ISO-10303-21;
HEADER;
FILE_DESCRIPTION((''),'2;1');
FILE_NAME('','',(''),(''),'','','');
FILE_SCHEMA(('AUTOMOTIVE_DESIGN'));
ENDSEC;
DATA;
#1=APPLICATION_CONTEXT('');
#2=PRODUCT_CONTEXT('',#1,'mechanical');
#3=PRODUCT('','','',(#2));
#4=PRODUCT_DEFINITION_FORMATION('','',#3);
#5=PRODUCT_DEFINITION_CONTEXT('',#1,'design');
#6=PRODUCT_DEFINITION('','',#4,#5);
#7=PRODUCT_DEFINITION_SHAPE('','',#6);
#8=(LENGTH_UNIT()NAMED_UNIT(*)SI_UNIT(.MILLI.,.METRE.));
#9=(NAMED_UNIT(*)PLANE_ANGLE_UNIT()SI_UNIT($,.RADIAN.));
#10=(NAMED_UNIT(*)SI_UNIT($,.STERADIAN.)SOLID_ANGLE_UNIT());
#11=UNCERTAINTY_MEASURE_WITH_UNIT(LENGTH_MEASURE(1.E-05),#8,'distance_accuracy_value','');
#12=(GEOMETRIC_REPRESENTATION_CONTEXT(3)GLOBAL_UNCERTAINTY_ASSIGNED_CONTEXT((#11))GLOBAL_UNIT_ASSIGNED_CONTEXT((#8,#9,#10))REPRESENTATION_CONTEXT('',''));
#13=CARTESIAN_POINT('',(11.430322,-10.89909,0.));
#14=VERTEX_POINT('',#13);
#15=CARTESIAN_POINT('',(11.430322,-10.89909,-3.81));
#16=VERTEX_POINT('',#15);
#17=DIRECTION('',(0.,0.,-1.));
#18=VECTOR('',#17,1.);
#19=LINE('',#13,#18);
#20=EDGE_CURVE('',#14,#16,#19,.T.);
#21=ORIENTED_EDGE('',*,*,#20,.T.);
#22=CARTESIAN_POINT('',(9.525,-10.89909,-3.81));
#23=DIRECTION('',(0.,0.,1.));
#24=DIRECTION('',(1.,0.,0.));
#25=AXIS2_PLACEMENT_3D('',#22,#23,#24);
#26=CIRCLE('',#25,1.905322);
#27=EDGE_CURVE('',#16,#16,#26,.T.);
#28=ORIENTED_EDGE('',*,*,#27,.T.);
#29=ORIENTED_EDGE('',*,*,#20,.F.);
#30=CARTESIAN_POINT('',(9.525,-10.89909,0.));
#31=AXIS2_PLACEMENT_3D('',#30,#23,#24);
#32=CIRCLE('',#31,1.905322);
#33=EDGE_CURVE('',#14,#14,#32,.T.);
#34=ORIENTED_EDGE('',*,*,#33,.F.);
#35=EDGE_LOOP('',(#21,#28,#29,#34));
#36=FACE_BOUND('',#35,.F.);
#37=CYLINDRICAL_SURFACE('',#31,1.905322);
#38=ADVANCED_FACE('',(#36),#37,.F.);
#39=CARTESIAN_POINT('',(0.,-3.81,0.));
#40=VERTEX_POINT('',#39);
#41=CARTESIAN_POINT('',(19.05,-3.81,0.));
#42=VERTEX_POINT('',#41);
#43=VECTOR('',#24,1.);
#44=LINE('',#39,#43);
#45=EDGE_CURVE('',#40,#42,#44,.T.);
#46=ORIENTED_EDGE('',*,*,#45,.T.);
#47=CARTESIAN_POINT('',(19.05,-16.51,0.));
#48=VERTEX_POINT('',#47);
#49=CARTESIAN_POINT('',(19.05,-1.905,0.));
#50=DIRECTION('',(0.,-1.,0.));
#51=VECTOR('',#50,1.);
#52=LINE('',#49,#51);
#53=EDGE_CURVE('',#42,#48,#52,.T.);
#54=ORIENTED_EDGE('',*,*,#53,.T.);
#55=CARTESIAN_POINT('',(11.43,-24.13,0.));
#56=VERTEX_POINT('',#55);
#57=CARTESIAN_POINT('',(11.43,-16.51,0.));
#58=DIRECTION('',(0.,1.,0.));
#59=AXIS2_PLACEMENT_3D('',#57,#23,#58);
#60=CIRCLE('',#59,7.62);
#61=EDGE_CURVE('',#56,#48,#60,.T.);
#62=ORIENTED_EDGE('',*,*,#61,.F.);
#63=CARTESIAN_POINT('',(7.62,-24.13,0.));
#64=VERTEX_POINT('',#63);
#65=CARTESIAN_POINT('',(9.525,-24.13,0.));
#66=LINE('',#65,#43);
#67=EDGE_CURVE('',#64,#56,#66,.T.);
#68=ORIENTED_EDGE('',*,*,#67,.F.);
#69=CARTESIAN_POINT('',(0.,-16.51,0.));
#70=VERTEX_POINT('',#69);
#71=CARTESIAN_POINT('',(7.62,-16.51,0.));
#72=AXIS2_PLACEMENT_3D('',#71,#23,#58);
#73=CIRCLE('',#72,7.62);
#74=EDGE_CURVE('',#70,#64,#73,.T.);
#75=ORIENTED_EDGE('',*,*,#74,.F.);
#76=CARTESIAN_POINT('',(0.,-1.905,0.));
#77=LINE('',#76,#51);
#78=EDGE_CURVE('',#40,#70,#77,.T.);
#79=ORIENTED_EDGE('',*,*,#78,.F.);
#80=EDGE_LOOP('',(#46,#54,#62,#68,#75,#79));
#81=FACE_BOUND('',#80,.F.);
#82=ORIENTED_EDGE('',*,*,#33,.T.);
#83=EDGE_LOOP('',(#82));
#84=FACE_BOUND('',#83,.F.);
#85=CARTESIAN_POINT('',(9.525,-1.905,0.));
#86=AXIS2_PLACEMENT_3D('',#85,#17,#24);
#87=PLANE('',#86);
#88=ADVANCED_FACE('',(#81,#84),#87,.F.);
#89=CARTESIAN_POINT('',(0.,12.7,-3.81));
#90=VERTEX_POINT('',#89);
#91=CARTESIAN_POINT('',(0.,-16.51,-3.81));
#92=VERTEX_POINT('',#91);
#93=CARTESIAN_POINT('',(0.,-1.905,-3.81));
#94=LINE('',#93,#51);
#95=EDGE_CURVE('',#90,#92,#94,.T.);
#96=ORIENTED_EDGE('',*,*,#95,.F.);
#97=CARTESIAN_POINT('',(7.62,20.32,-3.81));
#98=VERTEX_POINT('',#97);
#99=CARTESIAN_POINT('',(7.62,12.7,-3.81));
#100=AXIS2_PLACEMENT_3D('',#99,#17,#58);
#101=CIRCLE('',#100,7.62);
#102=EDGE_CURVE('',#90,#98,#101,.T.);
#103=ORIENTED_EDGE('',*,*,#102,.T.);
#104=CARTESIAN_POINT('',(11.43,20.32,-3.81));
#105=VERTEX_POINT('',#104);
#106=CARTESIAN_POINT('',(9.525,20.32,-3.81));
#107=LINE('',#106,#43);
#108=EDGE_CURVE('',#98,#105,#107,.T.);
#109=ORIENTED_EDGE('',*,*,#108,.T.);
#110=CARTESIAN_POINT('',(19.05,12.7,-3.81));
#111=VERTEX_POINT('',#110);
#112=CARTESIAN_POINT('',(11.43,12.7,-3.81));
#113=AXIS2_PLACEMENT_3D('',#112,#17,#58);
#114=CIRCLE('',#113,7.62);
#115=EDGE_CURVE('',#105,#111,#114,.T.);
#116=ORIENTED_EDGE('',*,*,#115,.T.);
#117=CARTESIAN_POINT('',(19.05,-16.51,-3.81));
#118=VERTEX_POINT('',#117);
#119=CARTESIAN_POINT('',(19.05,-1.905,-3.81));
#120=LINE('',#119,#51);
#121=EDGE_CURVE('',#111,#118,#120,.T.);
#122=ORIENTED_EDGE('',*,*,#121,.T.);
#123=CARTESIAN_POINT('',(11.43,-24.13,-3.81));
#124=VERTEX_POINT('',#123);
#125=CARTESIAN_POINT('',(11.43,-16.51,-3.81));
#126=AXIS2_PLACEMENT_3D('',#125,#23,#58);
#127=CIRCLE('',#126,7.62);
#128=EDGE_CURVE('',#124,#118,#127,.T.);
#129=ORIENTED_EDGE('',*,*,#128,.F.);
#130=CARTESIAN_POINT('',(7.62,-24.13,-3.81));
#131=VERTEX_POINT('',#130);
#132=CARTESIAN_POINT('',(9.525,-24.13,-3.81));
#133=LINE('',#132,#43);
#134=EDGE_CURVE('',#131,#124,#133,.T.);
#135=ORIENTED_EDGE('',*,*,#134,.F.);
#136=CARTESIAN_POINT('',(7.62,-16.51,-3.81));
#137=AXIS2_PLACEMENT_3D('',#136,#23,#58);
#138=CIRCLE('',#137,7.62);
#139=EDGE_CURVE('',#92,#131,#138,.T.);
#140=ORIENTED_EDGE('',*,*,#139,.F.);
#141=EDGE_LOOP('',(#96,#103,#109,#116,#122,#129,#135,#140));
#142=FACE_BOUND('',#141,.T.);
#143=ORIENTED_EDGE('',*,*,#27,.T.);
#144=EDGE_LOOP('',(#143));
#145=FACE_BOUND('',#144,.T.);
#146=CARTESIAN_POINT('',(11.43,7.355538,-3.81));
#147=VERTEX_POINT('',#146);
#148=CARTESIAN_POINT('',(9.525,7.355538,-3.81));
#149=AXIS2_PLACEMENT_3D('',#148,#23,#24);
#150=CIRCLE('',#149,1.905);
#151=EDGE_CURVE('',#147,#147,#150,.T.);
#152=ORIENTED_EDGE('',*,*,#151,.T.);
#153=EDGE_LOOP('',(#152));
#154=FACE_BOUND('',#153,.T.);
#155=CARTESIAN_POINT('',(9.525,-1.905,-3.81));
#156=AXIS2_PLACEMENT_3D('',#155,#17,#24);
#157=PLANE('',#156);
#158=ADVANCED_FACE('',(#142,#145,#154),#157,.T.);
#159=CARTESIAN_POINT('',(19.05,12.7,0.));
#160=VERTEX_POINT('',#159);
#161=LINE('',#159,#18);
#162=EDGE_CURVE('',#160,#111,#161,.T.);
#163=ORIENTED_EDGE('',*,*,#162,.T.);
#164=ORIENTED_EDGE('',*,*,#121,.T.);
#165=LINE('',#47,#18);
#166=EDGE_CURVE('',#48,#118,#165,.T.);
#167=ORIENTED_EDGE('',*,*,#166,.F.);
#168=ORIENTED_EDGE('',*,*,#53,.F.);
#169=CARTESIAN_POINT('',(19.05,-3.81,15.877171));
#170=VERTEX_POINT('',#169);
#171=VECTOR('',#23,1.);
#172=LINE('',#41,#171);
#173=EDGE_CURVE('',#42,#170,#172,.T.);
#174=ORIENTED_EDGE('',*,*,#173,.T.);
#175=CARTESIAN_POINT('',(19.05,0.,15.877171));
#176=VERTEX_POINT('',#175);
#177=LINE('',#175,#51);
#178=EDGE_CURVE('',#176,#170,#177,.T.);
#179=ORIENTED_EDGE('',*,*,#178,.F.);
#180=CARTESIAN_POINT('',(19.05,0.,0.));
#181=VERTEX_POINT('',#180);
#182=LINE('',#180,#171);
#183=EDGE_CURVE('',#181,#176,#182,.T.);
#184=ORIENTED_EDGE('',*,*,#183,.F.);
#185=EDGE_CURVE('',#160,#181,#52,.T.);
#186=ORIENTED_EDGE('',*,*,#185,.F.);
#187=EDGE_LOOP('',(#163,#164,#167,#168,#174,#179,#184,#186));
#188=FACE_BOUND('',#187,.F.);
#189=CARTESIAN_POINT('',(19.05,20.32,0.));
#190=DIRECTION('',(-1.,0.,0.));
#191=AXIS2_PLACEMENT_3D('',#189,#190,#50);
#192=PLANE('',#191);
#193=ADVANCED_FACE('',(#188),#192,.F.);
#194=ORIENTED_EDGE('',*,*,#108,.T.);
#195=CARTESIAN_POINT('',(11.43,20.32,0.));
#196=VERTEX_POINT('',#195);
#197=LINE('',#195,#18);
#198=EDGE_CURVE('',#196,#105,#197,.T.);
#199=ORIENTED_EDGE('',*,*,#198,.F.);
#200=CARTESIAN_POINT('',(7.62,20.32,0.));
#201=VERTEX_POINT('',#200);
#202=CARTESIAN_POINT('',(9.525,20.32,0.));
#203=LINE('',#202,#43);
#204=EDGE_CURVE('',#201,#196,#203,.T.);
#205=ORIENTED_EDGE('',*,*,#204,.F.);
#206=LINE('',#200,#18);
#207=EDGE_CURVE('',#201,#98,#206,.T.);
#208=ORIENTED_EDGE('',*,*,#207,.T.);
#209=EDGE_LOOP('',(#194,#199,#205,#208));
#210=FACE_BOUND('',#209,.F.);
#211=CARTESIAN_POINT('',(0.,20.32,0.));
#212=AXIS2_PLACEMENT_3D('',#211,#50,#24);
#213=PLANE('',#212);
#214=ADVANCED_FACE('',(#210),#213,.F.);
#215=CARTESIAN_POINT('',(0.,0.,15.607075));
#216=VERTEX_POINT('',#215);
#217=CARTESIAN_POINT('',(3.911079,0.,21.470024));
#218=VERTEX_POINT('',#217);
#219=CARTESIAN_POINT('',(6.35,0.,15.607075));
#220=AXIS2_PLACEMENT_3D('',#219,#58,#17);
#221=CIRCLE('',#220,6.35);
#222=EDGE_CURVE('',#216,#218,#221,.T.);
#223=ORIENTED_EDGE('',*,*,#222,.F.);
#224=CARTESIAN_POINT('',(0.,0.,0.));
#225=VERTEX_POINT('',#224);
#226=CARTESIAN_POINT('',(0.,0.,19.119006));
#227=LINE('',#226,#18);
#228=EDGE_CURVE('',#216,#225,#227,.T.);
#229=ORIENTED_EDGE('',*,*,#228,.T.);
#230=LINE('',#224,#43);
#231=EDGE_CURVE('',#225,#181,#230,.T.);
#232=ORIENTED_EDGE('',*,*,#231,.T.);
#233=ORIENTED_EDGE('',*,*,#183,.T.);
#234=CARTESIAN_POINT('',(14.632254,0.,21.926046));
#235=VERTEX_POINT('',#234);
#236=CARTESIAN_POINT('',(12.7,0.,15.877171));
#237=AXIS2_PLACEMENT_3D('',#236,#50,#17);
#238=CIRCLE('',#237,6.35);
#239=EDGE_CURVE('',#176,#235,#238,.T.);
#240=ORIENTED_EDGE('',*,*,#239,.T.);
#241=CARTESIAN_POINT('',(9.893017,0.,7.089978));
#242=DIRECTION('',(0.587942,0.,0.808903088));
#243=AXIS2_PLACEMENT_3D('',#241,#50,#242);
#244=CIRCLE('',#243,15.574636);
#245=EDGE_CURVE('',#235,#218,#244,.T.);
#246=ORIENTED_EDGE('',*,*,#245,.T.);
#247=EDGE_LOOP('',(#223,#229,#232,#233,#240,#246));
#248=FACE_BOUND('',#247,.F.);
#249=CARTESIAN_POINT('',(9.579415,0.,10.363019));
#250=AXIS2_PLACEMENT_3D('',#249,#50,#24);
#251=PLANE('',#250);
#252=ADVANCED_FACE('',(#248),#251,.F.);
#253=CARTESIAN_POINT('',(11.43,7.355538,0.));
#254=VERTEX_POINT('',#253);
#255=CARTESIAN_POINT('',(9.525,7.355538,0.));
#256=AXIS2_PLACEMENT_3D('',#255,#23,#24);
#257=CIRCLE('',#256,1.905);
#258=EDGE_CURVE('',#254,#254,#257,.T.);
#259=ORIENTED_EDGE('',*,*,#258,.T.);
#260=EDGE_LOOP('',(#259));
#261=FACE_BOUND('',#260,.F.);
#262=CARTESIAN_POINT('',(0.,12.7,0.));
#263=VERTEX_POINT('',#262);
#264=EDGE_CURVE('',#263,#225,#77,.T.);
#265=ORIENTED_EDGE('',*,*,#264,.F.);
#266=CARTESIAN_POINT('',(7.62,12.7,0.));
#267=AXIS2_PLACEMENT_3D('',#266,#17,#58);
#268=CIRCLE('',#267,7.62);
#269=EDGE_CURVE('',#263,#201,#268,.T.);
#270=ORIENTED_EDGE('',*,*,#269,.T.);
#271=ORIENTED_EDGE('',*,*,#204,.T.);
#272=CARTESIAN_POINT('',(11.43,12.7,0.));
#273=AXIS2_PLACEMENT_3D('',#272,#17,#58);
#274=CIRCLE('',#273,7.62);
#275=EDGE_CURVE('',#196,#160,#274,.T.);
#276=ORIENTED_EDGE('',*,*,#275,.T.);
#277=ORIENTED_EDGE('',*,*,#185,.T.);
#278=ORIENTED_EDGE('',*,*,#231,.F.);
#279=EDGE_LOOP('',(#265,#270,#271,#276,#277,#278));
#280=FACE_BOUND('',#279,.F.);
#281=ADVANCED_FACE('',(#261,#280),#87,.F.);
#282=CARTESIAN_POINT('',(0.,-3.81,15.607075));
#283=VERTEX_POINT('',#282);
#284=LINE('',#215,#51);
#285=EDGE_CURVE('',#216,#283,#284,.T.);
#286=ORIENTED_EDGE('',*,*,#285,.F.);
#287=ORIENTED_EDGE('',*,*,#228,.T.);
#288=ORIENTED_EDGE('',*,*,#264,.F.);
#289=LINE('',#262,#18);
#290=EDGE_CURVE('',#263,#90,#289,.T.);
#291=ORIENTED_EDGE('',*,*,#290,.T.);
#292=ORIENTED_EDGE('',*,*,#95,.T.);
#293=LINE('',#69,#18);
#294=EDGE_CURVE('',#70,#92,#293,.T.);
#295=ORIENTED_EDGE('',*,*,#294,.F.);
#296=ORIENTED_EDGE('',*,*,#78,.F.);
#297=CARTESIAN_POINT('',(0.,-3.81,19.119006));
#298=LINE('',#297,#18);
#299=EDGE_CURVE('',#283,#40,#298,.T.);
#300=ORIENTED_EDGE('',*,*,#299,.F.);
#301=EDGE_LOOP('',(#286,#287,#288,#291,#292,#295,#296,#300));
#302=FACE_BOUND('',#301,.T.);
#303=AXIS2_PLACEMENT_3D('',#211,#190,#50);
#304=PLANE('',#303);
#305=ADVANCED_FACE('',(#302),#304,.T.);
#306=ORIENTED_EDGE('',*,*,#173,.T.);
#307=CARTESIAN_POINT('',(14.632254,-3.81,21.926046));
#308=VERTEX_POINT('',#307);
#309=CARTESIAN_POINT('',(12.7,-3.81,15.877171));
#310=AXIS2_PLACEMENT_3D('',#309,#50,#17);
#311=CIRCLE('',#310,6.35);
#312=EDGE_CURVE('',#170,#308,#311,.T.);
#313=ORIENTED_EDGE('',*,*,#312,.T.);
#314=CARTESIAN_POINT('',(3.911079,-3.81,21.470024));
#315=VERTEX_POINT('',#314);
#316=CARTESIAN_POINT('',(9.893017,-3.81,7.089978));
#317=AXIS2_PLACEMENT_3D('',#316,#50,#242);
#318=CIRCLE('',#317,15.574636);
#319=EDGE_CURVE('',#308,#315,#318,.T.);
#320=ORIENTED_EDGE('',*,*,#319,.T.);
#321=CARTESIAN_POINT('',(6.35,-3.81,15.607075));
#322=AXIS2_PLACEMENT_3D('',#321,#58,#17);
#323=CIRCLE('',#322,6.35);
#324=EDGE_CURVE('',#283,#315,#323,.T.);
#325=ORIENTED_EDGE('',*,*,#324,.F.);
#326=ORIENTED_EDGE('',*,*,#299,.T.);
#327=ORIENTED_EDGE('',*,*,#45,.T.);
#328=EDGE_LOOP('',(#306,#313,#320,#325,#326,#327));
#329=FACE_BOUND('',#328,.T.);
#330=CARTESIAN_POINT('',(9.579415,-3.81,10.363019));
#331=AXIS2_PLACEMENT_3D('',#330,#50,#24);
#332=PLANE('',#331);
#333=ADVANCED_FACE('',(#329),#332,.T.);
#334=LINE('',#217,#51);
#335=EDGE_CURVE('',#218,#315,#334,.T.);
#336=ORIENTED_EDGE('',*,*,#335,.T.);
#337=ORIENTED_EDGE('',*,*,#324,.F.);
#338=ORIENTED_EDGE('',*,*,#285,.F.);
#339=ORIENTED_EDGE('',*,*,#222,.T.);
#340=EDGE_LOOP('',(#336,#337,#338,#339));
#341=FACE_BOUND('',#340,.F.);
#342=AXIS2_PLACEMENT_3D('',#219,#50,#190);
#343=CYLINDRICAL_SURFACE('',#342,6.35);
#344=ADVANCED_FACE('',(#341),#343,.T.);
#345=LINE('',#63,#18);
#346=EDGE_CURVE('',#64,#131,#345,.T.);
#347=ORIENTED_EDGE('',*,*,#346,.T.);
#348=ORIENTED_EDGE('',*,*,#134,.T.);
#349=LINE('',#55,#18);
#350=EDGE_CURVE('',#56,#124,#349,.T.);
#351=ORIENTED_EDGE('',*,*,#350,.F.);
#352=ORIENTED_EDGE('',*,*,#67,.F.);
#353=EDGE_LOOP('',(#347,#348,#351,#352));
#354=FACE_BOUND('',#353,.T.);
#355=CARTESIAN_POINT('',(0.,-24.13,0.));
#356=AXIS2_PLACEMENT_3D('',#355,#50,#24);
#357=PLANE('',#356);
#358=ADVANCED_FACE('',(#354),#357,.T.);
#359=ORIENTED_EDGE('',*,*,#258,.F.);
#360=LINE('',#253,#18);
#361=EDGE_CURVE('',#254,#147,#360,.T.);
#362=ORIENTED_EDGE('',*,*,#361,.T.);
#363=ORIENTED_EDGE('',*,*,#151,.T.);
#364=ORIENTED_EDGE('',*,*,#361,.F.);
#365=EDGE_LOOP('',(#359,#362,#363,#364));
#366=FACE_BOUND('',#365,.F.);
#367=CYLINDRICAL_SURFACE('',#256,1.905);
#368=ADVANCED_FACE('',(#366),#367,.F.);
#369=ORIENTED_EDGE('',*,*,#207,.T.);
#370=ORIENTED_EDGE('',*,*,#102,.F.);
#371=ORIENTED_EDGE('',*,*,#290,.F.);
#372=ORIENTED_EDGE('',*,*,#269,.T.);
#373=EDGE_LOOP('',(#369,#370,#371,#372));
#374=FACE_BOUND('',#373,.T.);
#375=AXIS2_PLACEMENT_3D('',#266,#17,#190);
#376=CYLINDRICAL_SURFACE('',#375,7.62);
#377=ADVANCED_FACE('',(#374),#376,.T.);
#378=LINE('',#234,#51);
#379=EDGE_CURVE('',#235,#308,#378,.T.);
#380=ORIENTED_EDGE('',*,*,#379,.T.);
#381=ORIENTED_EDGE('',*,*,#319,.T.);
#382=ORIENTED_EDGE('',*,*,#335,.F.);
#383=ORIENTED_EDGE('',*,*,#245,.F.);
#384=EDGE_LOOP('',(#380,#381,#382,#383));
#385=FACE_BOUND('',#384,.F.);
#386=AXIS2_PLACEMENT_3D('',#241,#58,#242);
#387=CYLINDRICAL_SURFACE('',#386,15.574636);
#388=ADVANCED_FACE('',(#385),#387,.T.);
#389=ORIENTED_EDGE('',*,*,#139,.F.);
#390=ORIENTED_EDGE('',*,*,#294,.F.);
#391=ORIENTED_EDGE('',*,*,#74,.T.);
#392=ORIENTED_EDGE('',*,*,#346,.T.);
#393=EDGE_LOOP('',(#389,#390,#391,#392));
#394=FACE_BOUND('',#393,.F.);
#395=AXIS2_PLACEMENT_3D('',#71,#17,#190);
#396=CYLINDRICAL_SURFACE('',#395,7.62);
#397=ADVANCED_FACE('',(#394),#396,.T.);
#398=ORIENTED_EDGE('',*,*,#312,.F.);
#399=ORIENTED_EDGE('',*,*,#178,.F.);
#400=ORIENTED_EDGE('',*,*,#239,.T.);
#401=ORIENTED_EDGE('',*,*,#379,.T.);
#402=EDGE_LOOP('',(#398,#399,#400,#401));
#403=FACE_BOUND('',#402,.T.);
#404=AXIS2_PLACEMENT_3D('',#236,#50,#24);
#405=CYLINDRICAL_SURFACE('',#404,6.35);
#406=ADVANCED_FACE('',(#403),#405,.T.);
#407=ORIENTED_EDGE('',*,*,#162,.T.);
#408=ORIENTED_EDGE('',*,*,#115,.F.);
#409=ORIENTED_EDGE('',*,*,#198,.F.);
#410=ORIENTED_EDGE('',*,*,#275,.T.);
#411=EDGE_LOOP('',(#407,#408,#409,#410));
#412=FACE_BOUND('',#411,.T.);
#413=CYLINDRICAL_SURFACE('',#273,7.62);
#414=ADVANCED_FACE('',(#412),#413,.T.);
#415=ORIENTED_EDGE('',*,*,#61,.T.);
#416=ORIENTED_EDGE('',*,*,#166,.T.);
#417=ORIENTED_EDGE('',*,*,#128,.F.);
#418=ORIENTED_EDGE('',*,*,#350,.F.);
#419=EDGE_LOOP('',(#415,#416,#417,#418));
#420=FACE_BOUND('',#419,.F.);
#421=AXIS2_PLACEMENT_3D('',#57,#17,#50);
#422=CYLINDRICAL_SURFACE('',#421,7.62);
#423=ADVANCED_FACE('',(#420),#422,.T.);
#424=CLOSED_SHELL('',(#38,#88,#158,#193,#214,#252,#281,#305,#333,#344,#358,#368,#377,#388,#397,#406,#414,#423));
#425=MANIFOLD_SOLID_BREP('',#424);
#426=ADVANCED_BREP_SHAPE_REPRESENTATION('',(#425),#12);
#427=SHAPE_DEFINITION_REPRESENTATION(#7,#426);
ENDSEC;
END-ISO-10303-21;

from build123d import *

# Parameters (mm, degrees)
F1_DEPTH = 3.81
F2_R     = 6.35
F3_W     = 19.05
F3_H     = 44.45
F4_DEPTH = 3.81
F5_R     = 7.62
F6_R     = 1.905
F6_R_2   = 1.9053216062
F7_DEPTH = 25.4


# Not quite as in the source:
# - a feature names something its author has since deleted; it is built from what else it names


with BuildPart() as f1:
    # F0 (on Front) → F1 (new body)
    with BuildSketch(Plane.XZ):
        with BuildLine():
            Line((0, 19.1190056503), (0, 0))
            Line((0, 0), (19.05, 0))
            Line((19.05, 0), (19.05, 19.6883492172))
            ThreePointArc((19.05, 19.6883492172), (9.4277487791, 22.6576630171), (0, 19.1190056503))
        make_face()
    extrude(amount=F1_DEPTH)

    # F2
    f2_edges = [f1.edges().sort_by_distance(p)[0] for p in [
        (0, -1.905, 19.119006),
        (19.05, -1.905, 19.688349),
    ]]
    fillet(f2_edges, radius=F2_R)

    # F3 (on face) → F4 (join)
    with BuildSketch(Plane(origin=(0, 0, 0), x_dir=(1, 0, 0), z_dir=(0, 0, -1))):
        with Locations((9.525, 1.905)):
            Rectangle(F3_W, F3_H)
    extrude(amount=F4_DEPTH)

    # F5
    f5_edges = [f1.edges().sort_by_distance(p)[0] for p in [
        (19.05, -24.13, -1.905),
        (0, -24.13, -1.905),
        (19.05, 20.32, -1.905),
        (0, 20.32, -1.905),
    ]]
    fillet(f5_edges, radius=F5_R)

    # F6 (on face) → F7 (cut)
    with BuildSketch(Plane.XY):
        with Locations((9.525, 7.3555377312)):
            Circle(F6_R)
        with Locations((9.525, -10.8990902081)):
            Circle(F6_R_2)
    extrude(amount=-F7_DEPTH, mode=Mode.SUBTRACT)


solid = f1.part
